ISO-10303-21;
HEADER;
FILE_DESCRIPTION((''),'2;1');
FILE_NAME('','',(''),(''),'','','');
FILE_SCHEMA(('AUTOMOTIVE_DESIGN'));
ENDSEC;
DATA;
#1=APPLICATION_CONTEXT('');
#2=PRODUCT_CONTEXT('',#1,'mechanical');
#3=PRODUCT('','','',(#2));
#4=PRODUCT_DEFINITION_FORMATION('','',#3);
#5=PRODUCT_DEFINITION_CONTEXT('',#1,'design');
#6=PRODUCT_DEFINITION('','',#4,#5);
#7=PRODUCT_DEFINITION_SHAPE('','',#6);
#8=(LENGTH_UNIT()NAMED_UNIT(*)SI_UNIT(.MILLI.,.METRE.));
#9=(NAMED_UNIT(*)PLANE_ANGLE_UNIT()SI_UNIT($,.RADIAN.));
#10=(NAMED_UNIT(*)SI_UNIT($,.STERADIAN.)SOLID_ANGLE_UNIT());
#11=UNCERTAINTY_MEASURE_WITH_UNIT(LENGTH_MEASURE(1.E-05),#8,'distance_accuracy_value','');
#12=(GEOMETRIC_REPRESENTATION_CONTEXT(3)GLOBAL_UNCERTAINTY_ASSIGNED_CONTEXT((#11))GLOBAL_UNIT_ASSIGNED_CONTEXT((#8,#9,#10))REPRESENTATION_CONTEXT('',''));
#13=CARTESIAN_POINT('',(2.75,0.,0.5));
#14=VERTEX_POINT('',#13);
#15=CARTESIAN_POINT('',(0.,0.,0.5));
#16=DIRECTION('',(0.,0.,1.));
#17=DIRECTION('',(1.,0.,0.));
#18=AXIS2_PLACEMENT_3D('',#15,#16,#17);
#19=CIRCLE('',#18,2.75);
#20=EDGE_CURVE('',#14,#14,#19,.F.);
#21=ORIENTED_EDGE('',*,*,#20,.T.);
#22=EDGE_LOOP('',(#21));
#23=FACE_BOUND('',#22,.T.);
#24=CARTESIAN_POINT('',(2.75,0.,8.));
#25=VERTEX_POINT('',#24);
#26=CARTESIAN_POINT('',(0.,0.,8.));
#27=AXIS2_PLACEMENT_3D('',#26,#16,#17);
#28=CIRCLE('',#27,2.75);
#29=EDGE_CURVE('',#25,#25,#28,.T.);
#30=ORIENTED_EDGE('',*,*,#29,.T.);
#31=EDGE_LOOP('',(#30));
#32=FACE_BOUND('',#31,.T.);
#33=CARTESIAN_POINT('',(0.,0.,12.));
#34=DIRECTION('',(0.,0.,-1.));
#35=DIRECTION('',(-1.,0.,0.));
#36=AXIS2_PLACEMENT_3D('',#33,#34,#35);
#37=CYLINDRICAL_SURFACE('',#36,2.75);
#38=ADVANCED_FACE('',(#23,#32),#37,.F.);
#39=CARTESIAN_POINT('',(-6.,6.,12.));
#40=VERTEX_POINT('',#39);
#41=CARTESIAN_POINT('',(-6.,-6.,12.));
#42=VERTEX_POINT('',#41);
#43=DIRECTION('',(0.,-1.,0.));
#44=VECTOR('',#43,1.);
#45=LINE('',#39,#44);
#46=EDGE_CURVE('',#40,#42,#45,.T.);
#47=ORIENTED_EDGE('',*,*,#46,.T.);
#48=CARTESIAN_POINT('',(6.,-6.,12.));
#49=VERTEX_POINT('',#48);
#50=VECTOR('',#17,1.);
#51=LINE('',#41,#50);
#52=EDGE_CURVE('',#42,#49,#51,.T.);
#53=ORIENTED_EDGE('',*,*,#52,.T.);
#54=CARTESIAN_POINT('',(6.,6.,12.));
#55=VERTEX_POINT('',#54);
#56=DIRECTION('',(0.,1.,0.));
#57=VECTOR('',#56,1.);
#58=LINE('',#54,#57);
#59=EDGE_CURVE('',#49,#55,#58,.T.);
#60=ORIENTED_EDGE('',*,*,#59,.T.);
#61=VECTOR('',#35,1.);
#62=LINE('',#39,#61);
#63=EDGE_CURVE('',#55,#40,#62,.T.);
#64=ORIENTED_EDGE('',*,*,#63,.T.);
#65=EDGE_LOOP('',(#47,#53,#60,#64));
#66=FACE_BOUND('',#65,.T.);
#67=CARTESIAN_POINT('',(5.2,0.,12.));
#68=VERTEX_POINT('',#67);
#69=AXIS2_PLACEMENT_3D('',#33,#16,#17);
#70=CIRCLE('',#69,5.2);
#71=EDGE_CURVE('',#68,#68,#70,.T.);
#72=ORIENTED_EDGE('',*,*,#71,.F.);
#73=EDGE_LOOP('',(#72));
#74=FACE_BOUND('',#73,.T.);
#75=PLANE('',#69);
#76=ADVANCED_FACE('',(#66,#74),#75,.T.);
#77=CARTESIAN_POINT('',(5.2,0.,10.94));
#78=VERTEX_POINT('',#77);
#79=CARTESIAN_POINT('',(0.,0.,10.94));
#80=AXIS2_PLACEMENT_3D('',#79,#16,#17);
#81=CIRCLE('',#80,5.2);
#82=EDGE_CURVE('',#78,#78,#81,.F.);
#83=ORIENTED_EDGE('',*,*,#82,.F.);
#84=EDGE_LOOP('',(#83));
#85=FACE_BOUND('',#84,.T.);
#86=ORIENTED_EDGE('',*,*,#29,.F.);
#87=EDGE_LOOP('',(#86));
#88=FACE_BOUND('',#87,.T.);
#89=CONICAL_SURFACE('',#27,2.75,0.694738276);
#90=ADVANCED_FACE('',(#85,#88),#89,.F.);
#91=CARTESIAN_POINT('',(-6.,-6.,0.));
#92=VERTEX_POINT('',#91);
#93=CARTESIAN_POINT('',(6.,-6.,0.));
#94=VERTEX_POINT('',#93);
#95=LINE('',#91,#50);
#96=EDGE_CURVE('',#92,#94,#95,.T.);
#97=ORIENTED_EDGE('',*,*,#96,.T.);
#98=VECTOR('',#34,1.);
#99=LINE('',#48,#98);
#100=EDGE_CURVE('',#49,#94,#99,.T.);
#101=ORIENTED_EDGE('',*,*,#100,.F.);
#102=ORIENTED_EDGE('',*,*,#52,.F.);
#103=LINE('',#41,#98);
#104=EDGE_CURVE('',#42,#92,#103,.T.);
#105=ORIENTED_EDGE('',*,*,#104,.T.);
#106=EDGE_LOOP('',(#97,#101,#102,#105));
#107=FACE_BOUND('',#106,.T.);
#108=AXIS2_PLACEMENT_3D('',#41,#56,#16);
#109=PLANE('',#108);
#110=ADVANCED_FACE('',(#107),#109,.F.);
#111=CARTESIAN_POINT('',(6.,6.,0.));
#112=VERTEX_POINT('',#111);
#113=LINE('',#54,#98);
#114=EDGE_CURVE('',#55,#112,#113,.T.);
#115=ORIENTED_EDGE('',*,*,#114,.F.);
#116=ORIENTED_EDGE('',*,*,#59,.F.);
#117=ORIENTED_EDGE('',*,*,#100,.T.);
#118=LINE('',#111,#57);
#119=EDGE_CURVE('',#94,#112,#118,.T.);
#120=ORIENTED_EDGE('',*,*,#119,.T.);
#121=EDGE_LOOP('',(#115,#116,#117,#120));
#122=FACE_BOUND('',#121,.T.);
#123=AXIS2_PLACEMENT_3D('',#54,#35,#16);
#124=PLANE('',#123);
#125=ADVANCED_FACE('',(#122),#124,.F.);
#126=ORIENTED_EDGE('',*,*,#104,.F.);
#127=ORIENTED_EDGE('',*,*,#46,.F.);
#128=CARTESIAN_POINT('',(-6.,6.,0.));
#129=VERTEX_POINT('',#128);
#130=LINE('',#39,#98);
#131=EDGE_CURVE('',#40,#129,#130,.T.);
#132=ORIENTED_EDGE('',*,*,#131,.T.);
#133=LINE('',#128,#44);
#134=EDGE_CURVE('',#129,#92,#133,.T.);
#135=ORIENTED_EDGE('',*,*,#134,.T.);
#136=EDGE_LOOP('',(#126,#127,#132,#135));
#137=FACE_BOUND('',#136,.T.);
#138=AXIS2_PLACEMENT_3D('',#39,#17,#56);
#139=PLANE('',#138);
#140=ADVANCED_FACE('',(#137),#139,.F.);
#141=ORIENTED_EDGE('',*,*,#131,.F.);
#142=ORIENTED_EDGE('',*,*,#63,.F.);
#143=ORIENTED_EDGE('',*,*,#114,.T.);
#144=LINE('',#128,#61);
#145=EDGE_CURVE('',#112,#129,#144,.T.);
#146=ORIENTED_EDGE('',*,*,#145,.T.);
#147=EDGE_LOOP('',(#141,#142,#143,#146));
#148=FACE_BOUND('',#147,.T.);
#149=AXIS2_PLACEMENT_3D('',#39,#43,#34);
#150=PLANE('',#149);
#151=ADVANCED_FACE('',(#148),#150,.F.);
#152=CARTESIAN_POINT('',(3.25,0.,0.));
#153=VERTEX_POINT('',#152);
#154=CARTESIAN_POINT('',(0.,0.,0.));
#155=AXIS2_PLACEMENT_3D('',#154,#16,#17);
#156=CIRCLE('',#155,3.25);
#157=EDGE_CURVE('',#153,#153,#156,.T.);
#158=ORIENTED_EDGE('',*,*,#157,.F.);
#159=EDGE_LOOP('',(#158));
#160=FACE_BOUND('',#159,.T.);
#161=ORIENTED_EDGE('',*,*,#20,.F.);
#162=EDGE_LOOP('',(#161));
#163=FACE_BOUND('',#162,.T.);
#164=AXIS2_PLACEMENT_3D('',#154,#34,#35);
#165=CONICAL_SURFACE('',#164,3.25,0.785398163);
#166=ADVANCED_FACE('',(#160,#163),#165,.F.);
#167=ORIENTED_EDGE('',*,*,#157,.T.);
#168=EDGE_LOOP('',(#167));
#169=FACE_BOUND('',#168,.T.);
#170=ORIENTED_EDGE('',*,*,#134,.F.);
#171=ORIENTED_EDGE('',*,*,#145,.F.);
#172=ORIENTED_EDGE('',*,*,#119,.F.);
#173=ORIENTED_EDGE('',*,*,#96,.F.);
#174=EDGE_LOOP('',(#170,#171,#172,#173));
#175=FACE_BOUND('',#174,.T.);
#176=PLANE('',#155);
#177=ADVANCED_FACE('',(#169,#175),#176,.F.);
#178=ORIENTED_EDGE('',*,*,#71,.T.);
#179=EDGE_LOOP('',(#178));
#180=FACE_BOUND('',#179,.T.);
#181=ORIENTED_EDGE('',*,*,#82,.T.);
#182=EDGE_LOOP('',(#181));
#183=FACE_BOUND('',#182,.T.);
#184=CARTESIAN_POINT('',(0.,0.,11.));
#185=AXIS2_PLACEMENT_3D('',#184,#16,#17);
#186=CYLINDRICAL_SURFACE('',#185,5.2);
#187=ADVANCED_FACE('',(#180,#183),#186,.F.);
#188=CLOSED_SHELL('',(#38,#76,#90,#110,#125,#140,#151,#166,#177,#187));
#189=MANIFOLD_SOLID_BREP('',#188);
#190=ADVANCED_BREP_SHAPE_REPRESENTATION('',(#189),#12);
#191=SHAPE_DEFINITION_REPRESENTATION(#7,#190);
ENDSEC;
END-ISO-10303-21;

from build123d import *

# Parameters (mm, degrees)
SKETCH1_W           = 12
SKETCH1_H           = 12
SKETCH1_R           = 2.75
BOSS_EXTRUDE1_DEPTH = 12
SKETCH2_R           = 5.2
CUT_EXTRUDE1_DEPTH  = 1
CHAMFER1_SIZE       = 3
CHAMFER1_SIZE_2     = 2.5
CHAMFER2_SIZE       = 0.5


with BuildPart() as part:
    # Sketch1 → Boss-Extrude1 (new body)
    with BuildSketch(Plane.XY):
        Rectangle(SKETCH1_W, SKETCH1_H)
        Circle(SKETCH1_R, mode=Mode.SUBTRACT)
    extrude(amount=BOSS_EXTRUDE1_DEPTH)

    # Sketch2 → Cut-Extrude1 (cut)
    with BuildSketch(Plane.XY.offset(12)):
        Circle(SKETCH2_R)
    extrude(amount=-CUT_EXTRUDE1_DEPTH, mode=Mode.SUBTRACT)

    # Chamfer1
    # the kernel refuses this chamfer: 3, 2.5 mm, written as the material it takes off along each edge
    with BuildSketch(Plane(origin=(0, 0, 11), x_dir=(1, 0, 0), z_dir=(0, 1, 0))) as chamfer1_piece_1_section:
        Polygon((2.75, CHAMFER1_SIZE), (2.75 + CHAMFER1_SIZE_2, 0), (2.75, 0), align=None)
    chamfer1_piece_1 = revolve(axis=Axis((0, 0, 11), (0, 0, -1)), mode=Mode.PRIVATE)
    chamfer1_piece_1 = chamfer1_piece_1 & Plane(origin=(0, 0, 9.452892591), x_dir=(1, 0, 0), z_dir=(0, 0, 1)) * Cylinder(5.2, 21, mode=Mode.PRIVATE)
    add(chamfer1_piece_1, mode=Mode.SUBTRACT)

    # Chamfer2
    chamfer2_edges = [part.edges().sort_by_distance(p)[0] for p in [
        (-2.75, 0, 0),
    ]]
    chamfer(chamfer2_edges, length=CHAMFER2_SIZE)


solid = part.part
